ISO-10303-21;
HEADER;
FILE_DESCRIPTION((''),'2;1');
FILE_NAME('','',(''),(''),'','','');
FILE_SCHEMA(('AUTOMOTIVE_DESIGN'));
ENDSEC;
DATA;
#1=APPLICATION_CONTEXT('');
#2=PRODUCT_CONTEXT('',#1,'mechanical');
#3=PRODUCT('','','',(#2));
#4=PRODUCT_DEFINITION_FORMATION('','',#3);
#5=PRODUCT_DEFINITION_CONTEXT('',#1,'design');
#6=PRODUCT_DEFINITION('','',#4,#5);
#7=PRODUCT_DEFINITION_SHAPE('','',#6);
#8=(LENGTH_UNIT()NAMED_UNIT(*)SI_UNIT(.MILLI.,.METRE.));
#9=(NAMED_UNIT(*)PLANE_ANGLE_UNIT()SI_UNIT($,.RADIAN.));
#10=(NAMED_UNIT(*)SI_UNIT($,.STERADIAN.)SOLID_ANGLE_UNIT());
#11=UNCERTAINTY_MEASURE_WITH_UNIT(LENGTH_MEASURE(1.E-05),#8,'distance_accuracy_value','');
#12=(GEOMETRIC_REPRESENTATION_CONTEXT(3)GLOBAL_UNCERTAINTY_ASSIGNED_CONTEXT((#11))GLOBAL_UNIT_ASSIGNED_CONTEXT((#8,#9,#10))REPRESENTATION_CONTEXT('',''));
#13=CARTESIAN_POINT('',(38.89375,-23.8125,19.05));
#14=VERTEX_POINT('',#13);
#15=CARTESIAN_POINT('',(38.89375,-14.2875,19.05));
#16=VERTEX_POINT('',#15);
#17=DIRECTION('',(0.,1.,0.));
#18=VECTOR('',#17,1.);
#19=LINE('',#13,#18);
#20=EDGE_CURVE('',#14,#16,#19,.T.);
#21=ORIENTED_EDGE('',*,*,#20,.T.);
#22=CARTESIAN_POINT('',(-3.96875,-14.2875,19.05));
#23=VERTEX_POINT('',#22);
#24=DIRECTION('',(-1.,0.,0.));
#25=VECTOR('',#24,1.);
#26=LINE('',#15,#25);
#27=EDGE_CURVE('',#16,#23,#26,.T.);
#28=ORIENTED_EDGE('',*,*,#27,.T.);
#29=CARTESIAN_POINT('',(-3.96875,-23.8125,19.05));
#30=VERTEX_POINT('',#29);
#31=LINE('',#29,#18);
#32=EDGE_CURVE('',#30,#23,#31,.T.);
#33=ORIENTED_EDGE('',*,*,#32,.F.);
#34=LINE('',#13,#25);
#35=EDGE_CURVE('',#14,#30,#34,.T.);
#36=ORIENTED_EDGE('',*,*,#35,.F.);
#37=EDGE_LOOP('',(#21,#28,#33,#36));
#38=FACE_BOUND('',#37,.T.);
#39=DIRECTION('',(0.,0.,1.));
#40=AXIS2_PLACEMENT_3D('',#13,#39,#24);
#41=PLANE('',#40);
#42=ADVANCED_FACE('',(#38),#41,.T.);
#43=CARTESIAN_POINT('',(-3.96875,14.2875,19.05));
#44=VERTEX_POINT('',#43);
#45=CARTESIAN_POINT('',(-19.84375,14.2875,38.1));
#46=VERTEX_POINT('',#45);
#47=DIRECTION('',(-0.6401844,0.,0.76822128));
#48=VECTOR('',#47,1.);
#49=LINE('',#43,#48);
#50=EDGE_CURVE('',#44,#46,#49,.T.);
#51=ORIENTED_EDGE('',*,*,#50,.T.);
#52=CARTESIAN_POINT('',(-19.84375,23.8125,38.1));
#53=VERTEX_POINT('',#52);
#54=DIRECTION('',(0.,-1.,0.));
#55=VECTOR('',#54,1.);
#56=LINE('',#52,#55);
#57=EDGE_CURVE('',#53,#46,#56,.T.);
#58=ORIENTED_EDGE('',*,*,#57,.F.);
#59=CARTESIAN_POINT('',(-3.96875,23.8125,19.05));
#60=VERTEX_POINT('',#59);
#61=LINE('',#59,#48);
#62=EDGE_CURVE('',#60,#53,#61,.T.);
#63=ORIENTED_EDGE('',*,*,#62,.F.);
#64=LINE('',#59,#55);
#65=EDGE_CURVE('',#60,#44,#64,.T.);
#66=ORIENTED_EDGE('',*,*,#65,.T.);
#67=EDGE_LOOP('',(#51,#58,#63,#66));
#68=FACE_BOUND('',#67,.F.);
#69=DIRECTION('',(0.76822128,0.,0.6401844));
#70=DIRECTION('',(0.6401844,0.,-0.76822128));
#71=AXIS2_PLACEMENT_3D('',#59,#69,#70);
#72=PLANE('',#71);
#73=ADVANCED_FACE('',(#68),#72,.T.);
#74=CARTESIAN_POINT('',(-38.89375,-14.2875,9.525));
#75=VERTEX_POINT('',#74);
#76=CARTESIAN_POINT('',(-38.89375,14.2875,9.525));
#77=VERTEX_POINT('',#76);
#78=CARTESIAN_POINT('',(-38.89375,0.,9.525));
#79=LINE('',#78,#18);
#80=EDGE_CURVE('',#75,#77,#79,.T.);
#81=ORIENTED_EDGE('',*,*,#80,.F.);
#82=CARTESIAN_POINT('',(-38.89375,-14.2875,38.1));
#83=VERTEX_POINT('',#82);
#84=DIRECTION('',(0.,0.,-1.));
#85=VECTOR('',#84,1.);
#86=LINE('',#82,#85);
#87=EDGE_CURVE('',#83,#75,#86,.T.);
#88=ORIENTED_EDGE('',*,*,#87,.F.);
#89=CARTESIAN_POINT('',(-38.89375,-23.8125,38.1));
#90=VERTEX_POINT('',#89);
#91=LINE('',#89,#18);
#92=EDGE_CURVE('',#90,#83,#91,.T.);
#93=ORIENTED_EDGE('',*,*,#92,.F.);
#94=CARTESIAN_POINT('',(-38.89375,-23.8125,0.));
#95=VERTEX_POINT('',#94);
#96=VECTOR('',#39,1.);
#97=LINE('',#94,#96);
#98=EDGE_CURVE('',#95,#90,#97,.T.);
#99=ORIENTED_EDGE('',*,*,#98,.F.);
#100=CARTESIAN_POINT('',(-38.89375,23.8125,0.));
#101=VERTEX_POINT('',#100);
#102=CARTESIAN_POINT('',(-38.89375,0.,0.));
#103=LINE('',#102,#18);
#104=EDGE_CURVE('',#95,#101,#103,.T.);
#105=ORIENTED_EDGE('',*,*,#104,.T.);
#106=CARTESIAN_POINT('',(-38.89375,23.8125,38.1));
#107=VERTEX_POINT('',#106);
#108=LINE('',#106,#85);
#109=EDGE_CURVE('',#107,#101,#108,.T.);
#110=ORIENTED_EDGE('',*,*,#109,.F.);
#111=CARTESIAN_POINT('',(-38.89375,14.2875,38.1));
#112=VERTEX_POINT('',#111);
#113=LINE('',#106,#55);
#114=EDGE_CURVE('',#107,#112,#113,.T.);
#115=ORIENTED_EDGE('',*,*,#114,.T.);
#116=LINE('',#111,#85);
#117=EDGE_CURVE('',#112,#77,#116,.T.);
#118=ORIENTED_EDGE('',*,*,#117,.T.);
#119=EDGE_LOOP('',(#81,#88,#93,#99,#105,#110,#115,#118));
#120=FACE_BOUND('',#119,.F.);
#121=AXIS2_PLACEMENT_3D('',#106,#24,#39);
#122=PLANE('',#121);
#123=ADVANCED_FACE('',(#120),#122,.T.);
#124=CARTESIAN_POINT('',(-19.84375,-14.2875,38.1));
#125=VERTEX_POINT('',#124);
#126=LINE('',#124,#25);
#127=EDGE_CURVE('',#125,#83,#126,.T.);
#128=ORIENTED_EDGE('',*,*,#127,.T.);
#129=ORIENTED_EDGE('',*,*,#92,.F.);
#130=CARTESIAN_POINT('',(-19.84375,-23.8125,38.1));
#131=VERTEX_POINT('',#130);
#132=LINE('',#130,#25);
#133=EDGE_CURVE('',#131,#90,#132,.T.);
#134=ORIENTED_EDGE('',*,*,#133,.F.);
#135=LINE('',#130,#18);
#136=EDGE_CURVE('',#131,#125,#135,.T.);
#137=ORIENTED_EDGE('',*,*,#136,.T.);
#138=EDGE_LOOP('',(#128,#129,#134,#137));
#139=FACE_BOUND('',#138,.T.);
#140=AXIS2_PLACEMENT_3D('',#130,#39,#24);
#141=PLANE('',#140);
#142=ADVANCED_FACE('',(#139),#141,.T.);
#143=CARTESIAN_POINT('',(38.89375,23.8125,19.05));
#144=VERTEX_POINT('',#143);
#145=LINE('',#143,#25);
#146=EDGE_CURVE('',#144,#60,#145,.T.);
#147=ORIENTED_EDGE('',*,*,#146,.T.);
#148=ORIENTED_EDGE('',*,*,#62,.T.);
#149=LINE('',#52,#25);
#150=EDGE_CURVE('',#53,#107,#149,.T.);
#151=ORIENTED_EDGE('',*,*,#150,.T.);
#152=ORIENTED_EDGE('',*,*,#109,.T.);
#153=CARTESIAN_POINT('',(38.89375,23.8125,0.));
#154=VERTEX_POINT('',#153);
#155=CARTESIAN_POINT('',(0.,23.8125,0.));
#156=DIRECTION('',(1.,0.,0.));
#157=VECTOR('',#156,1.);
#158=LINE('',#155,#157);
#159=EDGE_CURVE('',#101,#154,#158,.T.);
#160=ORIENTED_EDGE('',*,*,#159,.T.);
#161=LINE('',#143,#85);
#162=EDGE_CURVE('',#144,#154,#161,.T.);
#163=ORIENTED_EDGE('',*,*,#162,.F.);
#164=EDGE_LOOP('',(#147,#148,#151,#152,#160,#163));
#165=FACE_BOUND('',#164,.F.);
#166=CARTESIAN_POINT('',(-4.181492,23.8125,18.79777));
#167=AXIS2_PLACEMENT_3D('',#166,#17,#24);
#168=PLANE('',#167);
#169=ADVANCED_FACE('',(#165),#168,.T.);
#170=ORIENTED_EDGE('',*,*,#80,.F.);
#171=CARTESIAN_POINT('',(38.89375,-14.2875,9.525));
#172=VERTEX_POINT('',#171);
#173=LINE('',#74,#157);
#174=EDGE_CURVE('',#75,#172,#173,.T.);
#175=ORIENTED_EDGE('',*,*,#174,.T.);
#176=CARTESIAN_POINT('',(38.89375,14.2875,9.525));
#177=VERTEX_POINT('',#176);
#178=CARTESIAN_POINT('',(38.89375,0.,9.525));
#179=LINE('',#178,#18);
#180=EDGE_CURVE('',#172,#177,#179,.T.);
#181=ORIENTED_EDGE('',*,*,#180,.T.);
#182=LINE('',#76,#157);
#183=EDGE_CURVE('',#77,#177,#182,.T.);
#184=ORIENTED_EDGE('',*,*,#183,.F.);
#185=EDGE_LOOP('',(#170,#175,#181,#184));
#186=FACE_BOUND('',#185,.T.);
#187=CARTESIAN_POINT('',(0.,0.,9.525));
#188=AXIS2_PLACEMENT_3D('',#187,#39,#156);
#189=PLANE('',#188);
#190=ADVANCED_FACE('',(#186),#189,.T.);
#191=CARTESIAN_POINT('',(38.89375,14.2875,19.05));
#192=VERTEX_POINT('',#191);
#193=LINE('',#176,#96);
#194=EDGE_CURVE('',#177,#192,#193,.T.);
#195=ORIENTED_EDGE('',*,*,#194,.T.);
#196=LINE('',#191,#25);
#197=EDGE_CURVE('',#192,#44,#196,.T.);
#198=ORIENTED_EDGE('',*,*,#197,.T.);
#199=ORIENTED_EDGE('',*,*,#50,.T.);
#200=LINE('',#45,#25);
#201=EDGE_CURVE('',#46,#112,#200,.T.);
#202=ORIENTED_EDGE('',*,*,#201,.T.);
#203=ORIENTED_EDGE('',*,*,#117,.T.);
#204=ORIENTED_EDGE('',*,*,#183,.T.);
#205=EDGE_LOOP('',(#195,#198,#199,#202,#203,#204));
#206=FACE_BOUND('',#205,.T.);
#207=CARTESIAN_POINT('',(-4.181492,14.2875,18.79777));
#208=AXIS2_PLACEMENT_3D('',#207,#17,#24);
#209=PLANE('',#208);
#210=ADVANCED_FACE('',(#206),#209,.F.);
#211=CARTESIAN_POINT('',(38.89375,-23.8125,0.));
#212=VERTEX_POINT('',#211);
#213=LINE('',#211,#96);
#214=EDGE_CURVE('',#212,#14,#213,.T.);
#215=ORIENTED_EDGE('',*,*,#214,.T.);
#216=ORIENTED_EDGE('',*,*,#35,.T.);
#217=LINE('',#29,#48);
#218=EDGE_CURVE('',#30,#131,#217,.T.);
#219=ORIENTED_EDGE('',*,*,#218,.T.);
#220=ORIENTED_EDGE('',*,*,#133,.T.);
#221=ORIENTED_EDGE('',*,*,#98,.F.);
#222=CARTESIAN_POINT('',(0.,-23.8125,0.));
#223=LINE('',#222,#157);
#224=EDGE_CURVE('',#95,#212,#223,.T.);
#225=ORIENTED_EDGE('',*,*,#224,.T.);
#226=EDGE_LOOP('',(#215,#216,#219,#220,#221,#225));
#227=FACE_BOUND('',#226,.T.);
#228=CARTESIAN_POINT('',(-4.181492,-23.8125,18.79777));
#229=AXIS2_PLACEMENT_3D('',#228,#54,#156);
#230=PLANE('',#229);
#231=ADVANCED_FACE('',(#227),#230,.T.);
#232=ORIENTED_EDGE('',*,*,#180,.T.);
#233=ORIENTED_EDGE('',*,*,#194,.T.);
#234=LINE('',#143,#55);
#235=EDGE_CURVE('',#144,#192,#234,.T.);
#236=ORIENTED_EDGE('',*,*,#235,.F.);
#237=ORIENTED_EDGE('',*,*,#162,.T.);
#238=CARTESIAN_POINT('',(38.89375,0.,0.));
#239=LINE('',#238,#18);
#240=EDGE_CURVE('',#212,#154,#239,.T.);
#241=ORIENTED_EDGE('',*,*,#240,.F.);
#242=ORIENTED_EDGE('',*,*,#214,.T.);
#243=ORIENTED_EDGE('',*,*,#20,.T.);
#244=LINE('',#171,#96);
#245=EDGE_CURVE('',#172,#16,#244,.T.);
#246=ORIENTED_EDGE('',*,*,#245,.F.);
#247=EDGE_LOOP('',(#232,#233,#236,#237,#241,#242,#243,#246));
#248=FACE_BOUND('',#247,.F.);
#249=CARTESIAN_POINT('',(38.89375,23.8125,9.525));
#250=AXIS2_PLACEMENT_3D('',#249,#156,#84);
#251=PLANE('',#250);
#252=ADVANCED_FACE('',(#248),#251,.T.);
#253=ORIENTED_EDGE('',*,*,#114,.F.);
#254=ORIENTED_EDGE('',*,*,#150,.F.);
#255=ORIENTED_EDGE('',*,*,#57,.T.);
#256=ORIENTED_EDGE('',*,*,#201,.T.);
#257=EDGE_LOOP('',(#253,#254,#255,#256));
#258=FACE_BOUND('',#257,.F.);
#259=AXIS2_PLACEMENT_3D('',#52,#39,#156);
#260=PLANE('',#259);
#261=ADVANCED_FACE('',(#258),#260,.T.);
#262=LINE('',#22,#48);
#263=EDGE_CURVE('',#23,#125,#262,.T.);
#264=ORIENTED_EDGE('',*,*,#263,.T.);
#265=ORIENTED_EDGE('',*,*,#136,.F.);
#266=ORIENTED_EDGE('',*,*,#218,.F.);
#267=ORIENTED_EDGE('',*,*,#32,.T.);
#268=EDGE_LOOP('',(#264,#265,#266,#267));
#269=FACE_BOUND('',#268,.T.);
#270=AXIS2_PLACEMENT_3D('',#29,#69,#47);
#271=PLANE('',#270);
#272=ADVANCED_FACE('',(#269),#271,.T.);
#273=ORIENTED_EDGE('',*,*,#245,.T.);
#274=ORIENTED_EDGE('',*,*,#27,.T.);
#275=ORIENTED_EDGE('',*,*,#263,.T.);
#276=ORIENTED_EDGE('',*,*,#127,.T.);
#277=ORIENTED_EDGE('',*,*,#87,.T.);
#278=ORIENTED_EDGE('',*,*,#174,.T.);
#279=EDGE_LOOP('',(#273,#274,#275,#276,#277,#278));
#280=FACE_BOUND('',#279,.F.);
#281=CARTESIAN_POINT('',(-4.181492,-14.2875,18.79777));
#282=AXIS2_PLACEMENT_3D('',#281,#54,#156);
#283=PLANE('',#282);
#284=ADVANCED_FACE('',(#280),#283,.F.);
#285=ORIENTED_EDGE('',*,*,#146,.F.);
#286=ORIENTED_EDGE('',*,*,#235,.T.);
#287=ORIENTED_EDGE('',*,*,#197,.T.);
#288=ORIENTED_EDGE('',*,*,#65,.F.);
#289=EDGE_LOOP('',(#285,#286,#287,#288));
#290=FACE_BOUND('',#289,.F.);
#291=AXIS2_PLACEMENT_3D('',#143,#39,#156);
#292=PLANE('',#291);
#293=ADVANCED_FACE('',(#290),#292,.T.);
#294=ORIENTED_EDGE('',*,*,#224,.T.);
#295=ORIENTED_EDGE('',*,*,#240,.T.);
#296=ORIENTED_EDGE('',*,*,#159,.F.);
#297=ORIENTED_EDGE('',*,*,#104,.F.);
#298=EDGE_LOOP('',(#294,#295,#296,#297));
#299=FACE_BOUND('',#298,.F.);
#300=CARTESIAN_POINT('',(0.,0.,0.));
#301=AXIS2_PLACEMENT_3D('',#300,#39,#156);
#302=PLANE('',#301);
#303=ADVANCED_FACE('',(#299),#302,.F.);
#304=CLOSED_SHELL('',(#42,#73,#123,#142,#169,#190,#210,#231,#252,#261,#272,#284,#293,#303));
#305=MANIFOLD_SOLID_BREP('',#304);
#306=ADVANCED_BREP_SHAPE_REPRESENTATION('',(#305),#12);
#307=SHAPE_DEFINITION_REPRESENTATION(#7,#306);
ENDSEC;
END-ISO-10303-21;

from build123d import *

# Parameters (mm, degrees)
F0_W     = 77.7875
F0_H     = 47.625
F1_DEPTH = 9.525
F3_DEPTH = 9.525


# Not quite as in the source:
# - a pattern or mirror of a feature is missing from the dataset's text; its kind, count and spacing are read off the source's solid


with BuildPart() as f1:
    # F0 (on Top) → F1 (new body)
    with BuildSketch(Plane.XY):
        Rectangle(F0_W, F0_H)
    extrude(amount=F1_DEPTH)

    # F2 (on face) → F3 (join)
    with BuildSketch(Plane.XZ.offset(23.8125)):
        Polygon((-38.89375, 38.1), (-38.89375, 9.525), (38.89375, 9.525), (38.89375, 19.05), (-3.96875, 19.05), (-19.84375, 38.1), align=None)
    f3 = extrude(amount=-F3_DEPTH)

    # F3_copies: F3 across plane
    add(f3.mirror(Plane.ZX))


solid = f1.part
